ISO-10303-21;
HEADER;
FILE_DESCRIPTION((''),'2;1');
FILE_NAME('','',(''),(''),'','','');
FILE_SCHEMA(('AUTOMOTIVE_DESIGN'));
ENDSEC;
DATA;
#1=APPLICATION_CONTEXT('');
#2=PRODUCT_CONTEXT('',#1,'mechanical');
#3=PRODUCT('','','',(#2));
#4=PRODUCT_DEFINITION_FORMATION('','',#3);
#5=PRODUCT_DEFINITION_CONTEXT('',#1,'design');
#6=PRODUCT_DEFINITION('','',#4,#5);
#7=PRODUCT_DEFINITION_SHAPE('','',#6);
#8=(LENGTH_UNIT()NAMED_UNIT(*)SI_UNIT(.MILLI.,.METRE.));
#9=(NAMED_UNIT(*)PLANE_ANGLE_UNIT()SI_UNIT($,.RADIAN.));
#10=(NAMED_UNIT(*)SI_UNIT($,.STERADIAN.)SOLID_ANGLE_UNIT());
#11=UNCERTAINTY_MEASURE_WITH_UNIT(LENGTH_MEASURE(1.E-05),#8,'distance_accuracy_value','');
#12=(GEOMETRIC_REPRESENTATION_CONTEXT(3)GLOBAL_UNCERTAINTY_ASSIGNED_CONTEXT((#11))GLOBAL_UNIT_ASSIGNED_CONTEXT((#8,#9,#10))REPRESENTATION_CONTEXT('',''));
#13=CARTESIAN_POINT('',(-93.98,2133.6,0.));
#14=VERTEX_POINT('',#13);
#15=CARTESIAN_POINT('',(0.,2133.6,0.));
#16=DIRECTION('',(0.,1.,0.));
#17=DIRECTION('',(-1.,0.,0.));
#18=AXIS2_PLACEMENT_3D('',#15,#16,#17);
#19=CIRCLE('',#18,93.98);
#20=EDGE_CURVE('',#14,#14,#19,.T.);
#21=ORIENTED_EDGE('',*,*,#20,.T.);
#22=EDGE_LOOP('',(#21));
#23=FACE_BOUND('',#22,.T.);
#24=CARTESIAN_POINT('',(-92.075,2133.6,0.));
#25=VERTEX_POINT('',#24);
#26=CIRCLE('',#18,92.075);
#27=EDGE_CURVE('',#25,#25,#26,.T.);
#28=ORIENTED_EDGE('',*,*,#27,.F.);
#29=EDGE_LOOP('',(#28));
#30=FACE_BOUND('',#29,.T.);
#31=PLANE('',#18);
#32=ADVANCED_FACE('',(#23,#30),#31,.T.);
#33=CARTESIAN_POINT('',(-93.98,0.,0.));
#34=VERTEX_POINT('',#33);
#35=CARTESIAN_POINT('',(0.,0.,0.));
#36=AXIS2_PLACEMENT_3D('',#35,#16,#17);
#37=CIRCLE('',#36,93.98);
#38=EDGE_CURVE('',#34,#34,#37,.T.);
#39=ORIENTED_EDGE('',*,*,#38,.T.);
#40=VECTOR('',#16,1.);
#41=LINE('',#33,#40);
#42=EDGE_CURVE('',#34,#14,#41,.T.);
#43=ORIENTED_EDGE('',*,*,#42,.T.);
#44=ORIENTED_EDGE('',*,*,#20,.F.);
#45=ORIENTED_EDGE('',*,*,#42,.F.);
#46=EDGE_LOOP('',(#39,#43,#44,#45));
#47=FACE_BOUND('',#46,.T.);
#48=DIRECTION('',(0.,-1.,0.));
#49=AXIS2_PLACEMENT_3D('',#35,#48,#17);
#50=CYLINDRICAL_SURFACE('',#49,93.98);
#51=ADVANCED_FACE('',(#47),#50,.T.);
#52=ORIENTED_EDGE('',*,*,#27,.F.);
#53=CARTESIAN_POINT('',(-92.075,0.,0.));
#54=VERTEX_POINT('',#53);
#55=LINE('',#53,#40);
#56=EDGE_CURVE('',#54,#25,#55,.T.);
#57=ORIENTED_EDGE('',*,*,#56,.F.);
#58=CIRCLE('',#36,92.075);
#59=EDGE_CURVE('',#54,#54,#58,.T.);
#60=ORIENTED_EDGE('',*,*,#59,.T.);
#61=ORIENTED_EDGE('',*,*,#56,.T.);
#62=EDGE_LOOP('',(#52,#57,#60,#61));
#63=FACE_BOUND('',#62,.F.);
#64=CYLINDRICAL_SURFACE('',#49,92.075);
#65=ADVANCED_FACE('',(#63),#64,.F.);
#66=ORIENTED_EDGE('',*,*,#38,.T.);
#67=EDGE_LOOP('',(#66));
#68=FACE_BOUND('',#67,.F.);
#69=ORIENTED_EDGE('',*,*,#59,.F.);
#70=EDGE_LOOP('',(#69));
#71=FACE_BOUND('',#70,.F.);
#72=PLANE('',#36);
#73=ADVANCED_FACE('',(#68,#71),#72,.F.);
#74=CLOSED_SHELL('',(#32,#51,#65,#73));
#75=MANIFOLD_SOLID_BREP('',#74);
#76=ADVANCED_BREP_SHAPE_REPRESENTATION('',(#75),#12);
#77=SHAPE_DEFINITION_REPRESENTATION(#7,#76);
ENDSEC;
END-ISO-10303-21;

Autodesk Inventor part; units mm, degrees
ref_plane "YZ Plane" through (0, 0, 0) normal (1, 0, 0) x (0, 1, 0)
ref_plane "XZ Plane" through (0, 0, 0) normal (0, 1, 0) x (-1, 0, 0)
ref_plane "XY Plane" through (0, 0, 0) normal (0, 0, 1) x (1, 0, 0)
sketch "Sketch1" plane through (0, 0, 0) normal (0, 1, 0) x (-1, 0, 0)
  circle A0 centre (0, 0) radius 93.98
  circle A1 centre (0, 0) radius 92.075
  dimension "d1" = 184.15
  dimension "d4" = 187.96
extrude "Extrusion1" add sketch "Sketch1" along normal blind 2133.6
properties part number "8 in Phenolic Linter" material "Phenolic Resin"
